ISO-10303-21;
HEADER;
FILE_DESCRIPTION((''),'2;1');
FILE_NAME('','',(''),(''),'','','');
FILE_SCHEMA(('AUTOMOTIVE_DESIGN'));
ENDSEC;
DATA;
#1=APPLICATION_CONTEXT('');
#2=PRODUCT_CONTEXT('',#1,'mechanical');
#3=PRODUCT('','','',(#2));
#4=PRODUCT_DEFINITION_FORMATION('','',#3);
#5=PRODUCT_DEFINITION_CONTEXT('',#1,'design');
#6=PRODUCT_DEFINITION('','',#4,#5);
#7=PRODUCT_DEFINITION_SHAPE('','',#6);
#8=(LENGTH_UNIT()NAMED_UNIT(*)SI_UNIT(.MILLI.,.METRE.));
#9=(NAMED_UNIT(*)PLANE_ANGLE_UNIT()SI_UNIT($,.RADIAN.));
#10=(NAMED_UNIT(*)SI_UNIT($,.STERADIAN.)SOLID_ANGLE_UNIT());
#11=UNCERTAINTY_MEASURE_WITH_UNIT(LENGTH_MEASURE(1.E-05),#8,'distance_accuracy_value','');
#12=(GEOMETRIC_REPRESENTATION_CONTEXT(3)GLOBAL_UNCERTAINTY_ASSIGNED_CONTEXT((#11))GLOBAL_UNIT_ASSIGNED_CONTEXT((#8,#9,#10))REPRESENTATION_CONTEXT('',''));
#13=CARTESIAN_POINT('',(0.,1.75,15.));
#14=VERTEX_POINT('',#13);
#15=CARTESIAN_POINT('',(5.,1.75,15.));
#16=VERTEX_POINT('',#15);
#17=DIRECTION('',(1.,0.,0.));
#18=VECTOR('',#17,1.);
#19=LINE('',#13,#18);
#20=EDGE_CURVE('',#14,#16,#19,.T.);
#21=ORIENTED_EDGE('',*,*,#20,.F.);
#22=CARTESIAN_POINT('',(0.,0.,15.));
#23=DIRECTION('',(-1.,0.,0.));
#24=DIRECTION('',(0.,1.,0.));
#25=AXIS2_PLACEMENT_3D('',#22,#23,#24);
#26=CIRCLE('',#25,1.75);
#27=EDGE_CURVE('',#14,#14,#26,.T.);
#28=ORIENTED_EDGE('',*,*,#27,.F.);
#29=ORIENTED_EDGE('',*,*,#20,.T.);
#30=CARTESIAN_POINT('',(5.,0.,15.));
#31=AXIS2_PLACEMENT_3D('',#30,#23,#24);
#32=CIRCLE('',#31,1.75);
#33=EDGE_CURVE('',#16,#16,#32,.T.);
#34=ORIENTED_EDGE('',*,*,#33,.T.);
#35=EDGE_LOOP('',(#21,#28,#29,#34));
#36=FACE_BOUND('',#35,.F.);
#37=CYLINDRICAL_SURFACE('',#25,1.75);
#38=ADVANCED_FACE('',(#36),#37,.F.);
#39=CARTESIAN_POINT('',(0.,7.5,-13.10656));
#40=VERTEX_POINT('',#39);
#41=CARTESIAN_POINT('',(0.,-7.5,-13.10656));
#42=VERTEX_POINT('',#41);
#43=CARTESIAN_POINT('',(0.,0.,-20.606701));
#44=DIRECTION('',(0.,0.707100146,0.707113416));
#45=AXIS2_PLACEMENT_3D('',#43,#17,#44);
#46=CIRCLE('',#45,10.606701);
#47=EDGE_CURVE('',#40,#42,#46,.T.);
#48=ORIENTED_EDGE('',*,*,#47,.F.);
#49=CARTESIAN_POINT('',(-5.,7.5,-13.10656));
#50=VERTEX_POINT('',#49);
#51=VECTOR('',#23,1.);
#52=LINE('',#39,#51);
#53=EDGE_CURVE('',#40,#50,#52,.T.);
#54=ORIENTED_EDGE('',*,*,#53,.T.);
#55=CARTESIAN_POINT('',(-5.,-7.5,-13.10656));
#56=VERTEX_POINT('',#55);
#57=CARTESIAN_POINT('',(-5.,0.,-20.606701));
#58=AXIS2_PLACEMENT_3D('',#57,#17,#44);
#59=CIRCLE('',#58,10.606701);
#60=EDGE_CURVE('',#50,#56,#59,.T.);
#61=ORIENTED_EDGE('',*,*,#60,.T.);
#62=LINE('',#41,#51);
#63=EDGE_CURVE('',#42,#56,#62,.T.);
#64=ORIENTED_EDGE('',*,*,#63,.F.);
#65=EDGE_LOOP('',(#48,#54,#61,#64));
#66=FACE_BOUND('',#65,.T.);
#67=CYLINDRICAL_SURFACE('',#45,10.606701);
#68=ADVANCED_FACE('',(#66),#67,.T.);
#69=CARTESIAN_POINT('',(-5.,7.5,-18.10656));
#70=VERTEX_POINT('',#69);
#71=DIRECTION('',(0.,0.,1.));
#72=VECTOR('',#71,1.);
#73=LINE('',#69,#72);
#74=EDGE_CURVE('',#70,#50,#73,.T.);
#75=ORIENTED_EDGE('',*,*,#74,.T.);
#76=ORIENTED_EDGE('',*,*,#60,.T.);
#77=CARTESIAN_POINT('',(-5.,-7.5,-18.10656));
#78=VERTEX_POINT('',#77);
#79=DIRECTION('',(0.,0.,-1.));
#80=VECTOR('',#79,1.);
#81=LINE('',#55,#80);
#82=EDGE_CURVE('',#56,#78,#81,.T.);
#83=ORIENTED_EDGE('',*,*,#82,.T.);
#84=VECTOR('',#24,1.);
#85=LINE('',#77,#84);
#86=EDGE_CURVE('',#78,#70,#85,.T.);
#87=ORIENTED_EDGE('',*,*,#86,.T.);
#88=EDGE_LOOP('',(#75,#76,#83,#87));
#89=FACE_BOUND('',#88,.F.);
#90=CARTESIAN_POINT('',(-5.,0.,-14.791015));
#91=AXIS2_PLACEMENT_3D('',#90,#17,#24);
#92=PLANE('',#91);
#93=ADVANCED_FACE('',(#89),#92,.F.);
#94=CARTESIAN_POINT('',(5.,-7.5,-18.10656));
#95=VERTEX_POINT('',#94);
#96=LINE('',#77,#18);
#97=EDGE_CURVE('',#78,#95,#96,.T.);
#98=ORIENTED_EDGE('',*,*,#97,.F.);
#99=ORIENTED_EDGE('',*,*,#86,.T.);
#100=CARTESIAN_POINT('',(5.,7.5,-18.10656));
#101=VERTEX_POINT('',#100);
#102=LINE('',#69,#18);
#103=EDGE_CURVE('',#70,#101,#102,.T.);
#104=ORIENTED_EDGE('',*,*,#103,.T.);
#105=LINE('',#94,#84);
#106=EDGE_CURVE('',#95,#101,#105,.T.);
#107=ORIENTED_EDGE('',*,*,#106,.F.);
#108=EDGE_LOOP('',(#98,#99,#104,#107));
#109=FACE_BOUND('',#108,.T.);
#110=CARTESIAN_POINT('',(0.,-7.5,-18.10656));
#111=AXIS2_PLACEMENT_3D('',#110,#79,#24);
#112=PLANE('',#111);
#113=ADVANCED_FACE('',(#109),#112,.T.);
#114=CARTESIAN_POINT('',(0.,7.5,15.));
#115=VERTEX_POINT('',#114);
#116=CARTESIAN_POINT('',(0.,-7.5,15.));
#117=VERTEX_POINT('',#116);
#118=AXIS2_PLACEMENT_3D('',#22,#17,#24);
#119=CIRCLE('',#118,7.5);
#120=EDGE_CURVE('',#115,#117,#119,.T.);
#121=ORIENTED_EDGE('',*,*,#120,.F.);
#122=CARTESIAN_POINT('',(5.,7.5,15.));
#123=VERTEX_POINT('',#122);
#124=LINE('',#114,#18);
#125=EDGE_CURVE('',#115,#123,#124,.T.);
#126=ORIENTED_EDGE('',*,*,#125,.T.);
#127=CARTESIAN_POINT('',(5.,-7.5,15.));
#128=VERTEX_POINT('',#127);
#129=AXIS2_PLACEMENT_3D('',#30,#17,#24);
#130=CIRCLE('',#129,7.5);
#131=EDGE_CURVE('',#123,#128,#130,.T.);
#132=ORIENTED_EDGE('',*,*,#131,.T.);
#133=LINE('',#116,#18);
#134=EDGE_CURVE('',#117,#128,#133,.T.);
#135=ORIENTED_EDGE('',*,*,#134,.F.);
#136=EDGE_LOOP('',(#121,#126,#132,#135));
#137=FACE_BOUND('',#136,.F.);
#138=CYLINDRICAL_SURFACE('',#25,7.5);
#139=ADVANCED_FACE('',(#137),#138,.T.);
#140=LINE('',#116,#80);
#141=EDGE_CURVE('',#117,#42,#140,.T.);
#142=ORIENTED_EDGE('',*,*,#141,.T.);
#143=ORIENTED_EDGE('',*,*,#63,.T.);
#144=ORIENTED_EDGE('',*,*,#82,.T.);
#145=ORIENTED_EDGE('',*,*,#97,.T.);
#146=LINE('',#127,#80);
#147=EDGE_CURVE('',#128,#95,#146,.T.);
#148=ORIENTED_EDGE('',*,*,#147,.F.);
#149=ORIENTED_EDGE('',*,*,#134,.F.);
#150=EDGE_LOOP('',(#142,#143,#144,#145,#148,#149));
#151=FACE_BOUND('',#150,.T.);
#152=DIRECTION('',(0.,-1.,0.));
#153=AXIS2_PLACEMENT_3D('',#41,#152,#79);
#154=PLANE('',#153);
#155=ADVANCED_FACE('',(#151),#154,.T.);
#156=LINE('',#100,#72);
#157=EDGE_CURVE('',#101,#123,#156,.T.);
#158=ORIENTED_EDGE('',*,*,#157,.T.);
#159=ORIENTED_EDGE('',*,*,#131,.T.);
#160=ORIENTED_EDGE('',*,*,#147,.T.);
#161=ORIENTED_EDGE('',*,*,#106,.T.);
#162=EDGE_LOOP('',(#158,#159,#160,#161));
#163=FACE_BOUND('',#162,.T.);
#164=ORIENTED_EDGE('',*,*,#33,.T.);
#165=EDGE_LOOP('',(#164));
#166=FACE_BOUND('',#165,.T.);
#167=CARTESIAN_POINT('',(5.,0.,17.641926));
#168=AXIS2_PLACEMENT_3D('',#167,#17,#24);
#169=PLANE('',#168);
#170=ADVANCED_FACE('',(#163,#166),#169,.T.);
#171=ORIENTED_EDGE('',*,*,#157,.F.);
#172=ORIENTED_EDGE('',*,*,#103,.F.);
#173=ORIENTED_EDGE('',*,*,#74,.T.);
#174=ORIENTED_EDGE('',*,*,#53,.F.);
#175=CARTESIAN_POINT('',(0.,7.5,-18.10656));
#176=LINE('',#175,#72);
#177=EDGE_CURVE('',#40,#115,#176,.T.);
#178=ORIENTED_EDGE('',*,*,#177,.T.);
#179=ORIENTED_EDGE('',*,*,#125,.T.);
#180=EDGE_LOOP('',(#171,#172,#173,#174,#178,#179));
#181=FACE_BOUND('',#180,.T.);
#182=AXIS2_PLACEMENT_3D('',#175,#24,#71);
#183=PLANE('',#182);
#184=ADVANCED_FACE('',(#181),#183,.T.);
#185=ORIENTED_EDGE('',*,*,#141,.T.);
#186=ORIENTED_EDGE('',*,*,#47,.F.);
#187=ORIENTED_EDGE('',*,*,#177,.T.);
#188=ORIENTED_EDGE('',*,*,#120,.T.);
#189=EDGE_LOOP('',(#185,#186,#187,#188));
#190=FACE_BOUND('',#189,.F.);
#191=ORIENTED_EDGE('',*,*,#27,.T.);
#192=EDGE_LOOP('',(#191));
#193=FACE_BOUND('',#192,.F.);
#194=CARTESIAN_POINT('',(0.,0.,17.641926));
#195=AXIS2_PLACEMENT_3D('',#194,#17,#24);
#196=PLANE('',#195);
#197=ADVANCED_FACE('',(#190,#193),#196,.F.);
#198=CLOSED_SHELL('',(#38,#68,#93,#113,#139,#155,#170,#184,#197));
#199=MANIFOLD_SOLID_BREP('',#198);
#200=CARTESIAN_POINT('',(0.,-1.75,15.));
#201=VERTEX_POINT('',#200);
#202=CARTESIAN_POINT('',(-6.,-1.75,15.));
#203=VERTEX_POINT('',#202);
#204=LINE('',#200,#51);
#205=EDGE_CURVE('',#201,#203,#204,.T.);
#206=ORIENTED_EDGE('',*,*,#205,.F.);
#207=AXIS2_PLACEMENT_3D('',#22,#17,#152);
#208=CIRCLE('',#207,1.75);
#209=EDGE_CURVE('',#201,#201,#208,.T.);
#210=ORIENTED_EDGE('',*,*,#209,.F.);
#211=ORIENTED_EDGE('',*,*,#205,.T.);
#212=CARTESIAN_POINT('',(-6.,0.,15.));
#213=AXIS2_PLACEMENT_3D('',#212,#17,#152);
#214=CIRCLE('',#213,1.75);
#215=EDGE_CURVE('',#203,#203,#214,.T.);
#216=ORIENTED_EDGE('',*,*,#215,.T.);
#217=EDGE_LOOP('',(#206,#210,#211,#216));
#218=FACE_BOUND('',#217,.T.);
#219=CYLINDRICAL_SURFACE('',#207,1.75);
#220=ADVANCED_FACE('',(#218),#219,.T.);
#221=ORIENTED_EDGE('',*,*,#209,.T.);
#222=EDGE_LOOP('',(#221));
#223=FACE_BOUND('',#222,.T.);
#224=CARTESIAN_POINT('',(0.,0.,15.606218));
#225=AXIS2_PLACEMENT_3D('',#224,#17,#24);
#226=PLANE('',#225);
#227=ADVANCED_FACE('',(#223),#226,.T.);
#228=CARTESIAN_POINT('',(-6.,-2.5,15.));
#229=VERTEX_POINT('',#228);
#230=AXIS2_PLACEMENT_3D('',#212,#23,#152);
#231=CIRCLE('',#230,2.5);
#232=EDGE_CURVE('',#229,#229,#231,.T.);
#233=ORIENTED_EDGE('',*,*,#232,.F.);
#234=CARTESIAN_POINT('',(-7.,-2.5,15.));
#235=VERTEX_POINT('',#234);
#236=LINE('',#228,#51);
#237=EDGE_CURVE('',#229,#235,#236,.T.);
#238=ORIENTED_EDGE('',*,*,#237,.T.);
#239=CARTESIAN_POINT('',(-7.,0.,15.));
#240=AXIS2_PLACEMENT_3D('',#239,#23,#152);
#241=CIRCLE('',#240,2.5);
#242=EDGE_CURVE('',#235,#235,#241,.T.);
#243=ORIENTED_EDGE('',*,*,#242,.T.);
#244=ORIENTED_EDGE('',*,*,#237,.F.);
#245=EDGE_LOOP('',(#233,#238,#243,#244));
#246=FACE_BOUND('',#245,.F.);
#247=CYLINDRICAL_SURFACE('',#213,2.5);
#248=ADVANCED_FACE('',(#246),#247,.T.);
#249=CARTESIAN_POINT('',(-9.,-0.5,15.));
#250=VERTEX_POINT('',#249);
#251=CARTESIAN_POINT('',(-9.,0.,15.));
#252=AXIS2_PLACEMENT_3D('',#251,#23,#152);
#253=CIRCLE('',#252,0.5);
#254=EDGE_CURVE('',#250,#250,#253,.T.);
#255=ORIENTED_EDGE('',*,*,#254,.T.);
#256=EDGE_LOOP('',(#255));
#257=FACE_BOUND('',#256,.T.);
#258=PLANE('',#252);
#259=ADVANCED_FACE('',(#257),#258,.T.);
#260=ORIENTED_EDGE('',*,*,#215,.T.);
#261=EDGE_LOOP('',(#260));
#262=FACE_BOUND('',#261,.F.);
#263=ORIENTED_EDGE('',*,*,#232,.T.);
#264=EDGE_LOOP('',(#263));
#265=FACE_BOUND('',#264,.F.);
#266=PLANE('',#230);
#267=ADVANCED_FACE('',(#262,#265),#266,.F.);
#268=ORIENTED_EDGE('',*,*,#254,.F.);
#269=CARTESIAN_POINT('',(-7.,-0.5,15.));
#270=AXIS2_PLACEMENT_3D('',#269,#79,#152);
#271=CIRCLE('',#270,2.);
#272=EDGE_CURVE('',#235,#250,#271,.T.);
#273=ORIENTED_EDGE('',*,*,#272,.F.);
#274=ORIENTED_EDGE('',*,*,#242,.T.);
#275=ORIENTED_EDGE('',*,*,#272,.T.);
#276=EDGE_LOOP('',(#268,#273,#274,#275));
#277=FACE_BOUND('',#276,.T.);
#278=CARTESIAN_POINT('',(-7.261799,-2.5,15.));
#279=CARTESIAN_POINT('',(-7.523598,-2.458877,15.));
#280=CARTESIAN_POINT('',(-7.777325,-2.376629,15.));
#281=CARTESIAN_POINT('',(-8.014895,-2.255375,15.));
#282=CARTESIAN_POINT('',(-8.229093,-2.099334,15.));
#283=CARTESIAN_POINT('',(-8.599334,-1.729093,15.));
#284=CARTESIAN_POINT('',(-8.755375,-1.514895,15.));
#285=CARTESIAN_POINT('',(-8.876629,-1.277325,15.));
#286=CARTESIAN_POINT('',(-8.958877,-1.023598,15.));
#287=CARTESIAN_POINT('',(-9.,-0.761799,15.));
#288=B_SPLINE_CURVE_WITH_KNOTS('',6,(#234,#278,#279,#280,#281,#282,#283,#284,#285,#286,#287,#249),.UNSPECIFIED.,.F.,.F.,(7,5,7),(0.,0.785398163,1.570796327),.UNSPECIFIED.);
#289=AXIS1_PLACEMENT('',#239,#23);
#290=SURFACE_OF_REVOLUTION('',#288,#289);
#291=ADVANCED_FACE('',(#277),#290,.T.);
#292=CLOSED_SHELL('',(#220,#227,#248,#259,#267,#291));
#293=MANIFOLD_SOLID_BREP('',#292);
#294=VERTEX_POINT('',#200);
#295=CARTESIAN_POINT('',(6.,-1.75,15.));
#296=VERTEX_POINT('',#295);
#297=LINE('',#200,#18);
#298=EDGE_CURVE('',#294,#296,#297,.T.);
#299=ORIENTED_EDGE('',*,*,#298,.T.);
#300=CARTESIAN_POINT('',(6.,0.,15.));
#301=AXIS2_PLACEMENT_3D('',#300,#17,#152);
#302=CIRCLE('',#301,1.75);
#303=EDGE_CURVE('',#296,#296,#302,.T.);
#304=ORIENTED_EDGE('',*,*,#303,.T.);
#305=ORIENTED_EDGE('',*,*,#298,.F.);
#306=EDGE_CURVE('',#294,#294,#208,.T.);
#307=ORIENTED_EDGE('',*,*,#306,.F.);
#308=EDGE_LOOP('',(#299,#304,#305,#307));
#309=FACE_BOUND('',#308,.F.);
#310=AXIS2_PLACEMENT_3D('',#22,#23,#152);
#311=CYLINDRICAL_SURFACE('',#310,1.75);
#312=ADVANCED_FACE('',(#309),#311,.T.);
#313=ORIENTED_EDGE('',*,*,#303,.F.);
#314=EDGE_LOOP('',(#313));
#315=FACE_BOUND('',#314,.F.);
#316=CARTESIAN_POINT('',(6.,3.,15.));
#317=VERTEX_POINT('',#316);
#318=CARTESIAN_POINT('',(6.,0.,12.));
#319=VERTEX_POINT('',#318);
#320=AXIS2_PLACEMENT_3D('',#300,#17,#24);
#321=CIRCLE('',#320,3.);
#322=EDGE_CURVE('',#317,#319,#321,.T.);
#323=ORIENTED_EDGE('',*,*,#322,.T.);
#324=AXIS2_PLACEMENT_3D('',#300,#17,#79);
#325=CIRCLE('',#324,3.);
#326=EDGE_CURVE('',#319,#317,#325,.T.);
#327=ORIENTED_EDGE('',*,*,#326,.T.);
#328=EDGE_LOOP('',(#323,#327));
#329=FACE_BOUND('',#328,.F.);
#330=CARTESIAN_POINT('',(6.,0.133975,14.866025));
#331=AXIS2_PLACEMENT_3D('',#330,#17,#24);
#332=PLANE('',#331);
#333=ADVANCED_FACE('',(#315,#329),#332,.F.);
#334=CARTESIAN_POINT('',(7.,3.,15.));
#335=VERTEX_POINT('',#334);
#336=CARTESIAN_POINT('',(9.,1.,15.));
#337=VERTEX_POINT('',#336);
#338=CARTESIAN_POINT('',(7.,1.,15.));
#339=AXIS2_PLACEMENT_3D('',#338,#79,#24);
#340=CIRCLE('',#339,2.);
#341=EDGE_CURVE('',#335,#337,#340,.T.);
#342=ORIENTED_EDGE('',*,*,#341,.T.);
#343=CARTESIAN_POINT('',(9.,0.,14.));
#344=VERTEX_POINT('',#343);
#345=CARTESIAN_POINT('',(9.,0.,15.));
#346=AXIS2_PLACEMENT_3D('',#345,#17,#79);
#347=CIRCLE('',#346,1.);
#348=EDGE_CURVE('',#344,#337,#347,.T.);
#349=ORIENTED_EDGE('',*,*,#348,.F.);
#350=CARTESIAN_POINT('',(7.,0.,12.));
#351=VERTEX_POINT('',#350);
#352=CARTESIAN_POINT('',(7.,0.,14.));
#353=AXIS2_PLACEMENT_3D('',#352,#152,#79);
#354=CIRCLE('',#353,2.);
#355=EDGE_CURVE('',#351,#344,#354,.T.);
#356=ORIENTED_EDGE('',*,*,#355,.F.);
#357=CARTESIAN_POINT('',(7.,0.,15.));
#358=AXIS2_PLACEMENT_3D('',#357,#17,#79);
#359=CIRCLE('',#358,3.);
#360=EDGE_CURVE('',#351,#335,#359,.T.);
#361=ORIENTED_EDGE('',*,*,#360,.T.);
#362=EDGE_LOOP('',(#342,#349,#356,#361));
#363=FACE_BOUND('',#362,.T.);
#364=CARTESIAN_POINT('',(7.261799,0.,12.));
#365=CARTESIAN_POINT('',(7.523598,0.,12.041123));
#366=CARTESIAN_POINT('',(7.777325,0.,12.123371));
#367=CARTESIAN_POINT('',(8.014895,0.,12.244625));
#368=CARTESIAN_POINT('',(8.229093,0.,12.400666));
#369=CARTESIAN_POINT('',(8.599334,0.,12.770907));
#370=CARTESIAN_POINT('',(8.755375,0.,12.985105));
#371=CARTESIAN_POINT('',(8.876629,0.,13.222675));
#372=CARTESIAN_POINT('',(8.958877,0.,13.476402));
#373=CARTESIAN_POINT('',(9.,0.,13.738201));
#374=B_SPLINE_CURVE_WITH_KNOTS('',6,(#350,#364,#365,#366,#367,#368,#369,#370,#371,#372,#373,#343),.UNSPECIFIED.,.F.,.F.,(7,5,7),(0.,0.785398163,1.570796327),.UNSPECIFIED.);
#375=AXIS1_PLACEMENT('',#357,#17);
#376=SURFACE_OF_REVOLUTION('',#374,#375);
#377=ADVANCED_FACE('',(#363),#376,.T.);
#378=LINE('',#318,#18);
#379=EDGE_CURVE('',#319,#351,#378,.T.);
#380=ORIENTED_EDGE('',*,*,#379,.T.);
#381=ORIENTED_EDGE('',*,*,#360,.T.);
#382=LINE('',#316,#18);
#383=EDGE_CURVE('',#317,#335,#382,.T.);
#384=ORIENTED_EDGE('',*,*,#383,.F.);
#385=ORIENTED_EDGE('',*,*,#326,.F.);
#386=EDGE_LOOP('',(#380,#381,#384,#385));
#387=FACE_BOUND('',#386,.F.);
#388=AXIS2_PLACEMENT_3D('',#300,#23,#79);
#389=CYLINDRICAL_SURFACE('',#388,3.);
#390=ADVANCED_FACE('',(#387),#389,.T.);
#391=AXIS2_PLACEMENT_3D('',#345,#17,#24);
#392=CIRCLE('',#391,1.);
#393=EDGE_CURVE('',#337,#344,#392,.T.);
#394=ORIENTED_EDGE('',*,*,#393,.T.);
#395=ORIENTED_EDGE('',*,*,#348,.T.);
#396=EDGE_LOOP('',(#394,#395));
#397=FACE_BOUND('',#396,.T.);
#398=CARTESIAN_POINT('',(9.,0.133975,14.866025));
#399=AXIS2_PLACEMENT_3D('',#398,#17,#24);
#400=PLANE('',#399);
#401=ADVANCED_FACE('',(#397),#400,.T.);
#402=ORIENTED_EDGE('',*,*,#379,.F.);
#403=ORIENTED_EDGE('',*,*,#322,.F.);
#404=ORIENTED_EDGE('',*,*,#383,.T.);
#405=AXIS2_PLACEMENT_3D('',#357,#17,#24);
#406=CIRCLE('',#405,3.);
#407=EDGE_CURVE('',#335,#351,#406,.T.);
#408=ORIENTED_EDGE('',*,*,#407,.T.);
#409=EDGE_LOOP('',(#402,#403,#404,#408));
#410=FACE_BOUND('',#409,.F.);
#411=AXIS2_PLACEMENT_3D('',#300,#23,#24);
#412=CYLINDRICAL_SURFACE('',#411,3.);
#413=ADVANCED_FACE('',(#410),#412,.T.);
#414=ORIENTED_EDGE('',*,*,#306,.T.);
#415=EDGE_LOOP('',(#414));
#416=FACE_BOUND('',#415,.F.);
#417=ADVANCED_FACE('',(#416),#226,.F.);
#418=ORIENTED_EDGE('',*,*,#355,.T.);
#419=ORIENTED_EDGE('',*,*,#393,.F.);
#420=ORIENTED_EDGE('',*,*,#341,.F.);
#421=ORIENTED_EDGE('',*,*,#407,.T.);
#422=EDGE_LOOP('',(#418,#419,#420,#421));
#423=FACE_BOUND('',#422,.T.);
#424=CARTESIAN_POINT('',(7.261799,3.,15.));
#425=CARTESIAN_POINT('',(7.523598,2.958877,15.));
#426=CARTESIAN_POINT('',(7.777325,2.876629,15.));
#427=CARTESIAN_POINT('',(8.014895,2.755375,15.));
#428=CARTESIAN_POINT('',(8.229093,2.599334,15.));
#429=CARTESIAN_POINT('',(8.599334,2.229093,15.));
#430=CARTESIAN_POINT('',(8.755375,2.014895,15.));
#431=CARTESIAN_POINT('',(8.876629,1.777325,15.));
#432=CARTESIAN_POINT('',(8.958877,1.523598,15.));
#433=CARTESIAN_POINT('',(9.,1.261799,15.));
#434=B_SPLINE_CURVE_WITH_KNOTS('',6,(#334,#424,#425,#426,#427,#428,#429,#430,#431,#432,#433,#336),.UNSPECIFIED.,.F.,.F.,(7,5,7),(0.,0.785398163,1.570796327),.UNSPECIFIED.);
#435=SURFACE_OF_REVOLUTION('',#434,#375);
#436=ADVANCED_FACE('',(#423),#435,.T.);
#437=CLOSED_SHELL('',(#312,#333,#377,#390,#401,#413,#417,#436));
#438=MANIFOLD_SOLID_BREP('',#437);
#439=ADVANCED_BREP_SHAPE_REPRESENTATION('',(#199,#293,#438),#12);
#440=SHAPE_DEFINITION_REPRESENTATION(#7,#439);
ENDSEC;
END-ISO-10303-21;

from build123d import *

# Parameters (mm, degrees)
F1_DEPTH = 5
F2_DEPTH = 5
F3_DEPTH = 6
F5_DEPTH = 3
F6_R     = 2
F7_DEPTH = 6
F8_R     = 2.5
F9_DEPTH = 3
F10_R    = 2


# Not quite as in the source:
# - a feature names something its author has since deleted; it is built from what else it names
# - the program builds the solid bodies; features that only make, move or delete a surface that nothing else refers to are left out


with BuildPart() as f1:
    # F0 (on Right) → F1 (new body)
    with BuildSketch(Plane.YZ):
        with BuildLine():
            ThreePointArc((7.5, 15), (0, 22.5), (-7.5, 15))
            Line((-7.5, 15), (-2, 15))
            ThreePointArc((-2, 15), (0, 17), (2, 15))
            Line((2, 15), (7.5, 15))
        make_face()
        with BuildLine():
            ThreePointArc((2, 15), (0, 17), (-2, 15))
            Line((-2, 15), (-1.95, 15))
            ThreePointArc((-1.95, 15), (0, 16.95), (1.95, 15))
            Line((1.95, 15), (2, 15))
        make_face()
        with BuildLine():
            ThreePointArc((1.95, 15), (0, 16.95), (-1.95, 15))
            Line((-1.95, 15), (-1.75, 15))
            ThreePointArc((-1.75, 15), (0, 16.75), (1.75, 15))
            Line((1.75, 15), (1.95, 15))
        make_face()
        with BuildLine():
            Line((-7.5, 15), (-7.5, -5.6289238692))
            ThreePointArc((-7.5, -5.6289238692), (0, -6.95), (7.5, -5.6289238692))
            Line((7.5, -5.6289238692), (7.5, 15))
            Line((7.5, 15), (2, 15))
            ThreePointArc((2, 15), (0, 13), (-2, 15))
            Line((-2, 15), (-7.5, 15))
        make_face()
        with BuildLine():
            Line((-1.95, 15), (-2, 15))
            ThreePointArc((-2, 15), (0, 13), (2, 15))
            Line((2, 15), (1.95, 15))
            ThreePointArc((1.95, 15), (0, 13.05), (-1.95, 15))
        make_face()
        with BuildLine():
            Line((-1.75, 15), (-1.95, 15))
            ThreePointArc((-1.95, 15), (0, 13.05), (1.95, 15))
            Line((1.95, 15), (1.75, 15))
            ThreePointArc((1.75, 15), (0, 13.25), (-1.75, 15))
        make_face()
        with BuildLine():
            Line((-7.5, -5.6289238692), (-7.5, -13.1065604925))
            ThreePointArc((-7.5, -13.1065604925), (0, -10), (7.5, -13.1065604925))
            Line((7.5, -13.1065604925), (7.5, -5.6289238692))
            ThreePointArc((7.5, -5.6289238692), (0, -6.95), (-7.5, -5.6289238692))
        make_face()
        with BuildLine():
            Line((-7.5, -13.1065604925), (-7.5, -18.1065604925))
            Line((-7.5, -18.1065604925), (7.5, -18.1065604925))
            Line((7.5, -18.1065604925), (7.5, -13.1065604925))
            ThreePointArc((7.5, -13.1065604925), (0, -10), (-7.5, -13.1065604925))
        make_face()
    extrude(amount=F1_DEPTH)

    # F0 (on Right) → F2 (join)
    with BuildSketch(Plane.YZ):
        with BuildLine():
            Line((-7.5, -13.1065604925), (-7.5, -18.1065604925))
            Line((-7.5, -18.1065604925), (7.5, -18.1065604925))
            Line((7.5, -18.1065604925), (7.5, -13.1065604925))
            ThreePointArc((7.5, -13.1065604925), (0, -10), (-7.5, -13.1065604925))
        make_face()
    extrude(amount=-F2_DEPTH)


with BuildPart() as f3:
    # F0 (on Right) → F3 (new body)
    with BuildSketch(Plane.YZ):
        with BuildLine():
            ThreePointArc((1.75, 15), (0, 16.75), (-1.75, 15))
            Line((-1.75, 15), (1.75, 15))
        make_face()
        with BuildLine():
            Line((1.75, 15), (-1.75, 15))
            ThreePointArc((-1.75, 15), (0, 13.25), (1.75, 15))
        make_face()
    extrude(amount=F3_DEPTH)

    # F4 (on face) → F5 (join)
    with BuildSketch(Plane.YZ.offset(6)):
        with BuildLine():
            ThreePointArc((0, 12), (2.1213203436, 12.8786796564), (3, 15))
            ThreePointArc((3, 15), (-2.1213203436, 17.1213203436), (0, 12))
        make_face()
    extrude(amount=F5_DEPTH)

    # F6
    f6_edges = [f3.edges().sort_by_distance(p)[0] for p in [
        (9, 0, 18),
    ]]
    fillet(f6_edges, radius=F6_R)


with BuildPart() as f7:
    # F0 (on Right) → F7 (new body)
    with BuildSketch(Plane.YZ):
        with BuildLine():
            ThreePointArc((1.75, 15), (0, 16.75), (-1.75, 15))
            Line((-1.75, 15), (1.75, 15))
        make_face()
        with BuildLine():
            Line((1.75, 15), (-1.75, 15))
            ThreePointArc((-1.75, 15), (0, 13.25), (1.75, 15))
        make_face()
    extrude(amount=-F7_DEPTH)

    # F8 (on face) → F9 (join)
    with BuildSketch(Plane(origin=(-6, 0, 0), x_dir=(0, -1, 0), z_dir=(-1, 0, 0))):
        with Locations((0, 15)):
            Circle(F8_R)
    extrude(amount=F9_DEPTH)

    # F10
    f10_edges = [f7.edges().sort_by_distance(p)[0] for p in [
        (-9, 2.5, 15),
    ]]
    fillet(f10_edges, radius=F10_R)


solid = Compound([f1.part, f3.part, f7.part])
